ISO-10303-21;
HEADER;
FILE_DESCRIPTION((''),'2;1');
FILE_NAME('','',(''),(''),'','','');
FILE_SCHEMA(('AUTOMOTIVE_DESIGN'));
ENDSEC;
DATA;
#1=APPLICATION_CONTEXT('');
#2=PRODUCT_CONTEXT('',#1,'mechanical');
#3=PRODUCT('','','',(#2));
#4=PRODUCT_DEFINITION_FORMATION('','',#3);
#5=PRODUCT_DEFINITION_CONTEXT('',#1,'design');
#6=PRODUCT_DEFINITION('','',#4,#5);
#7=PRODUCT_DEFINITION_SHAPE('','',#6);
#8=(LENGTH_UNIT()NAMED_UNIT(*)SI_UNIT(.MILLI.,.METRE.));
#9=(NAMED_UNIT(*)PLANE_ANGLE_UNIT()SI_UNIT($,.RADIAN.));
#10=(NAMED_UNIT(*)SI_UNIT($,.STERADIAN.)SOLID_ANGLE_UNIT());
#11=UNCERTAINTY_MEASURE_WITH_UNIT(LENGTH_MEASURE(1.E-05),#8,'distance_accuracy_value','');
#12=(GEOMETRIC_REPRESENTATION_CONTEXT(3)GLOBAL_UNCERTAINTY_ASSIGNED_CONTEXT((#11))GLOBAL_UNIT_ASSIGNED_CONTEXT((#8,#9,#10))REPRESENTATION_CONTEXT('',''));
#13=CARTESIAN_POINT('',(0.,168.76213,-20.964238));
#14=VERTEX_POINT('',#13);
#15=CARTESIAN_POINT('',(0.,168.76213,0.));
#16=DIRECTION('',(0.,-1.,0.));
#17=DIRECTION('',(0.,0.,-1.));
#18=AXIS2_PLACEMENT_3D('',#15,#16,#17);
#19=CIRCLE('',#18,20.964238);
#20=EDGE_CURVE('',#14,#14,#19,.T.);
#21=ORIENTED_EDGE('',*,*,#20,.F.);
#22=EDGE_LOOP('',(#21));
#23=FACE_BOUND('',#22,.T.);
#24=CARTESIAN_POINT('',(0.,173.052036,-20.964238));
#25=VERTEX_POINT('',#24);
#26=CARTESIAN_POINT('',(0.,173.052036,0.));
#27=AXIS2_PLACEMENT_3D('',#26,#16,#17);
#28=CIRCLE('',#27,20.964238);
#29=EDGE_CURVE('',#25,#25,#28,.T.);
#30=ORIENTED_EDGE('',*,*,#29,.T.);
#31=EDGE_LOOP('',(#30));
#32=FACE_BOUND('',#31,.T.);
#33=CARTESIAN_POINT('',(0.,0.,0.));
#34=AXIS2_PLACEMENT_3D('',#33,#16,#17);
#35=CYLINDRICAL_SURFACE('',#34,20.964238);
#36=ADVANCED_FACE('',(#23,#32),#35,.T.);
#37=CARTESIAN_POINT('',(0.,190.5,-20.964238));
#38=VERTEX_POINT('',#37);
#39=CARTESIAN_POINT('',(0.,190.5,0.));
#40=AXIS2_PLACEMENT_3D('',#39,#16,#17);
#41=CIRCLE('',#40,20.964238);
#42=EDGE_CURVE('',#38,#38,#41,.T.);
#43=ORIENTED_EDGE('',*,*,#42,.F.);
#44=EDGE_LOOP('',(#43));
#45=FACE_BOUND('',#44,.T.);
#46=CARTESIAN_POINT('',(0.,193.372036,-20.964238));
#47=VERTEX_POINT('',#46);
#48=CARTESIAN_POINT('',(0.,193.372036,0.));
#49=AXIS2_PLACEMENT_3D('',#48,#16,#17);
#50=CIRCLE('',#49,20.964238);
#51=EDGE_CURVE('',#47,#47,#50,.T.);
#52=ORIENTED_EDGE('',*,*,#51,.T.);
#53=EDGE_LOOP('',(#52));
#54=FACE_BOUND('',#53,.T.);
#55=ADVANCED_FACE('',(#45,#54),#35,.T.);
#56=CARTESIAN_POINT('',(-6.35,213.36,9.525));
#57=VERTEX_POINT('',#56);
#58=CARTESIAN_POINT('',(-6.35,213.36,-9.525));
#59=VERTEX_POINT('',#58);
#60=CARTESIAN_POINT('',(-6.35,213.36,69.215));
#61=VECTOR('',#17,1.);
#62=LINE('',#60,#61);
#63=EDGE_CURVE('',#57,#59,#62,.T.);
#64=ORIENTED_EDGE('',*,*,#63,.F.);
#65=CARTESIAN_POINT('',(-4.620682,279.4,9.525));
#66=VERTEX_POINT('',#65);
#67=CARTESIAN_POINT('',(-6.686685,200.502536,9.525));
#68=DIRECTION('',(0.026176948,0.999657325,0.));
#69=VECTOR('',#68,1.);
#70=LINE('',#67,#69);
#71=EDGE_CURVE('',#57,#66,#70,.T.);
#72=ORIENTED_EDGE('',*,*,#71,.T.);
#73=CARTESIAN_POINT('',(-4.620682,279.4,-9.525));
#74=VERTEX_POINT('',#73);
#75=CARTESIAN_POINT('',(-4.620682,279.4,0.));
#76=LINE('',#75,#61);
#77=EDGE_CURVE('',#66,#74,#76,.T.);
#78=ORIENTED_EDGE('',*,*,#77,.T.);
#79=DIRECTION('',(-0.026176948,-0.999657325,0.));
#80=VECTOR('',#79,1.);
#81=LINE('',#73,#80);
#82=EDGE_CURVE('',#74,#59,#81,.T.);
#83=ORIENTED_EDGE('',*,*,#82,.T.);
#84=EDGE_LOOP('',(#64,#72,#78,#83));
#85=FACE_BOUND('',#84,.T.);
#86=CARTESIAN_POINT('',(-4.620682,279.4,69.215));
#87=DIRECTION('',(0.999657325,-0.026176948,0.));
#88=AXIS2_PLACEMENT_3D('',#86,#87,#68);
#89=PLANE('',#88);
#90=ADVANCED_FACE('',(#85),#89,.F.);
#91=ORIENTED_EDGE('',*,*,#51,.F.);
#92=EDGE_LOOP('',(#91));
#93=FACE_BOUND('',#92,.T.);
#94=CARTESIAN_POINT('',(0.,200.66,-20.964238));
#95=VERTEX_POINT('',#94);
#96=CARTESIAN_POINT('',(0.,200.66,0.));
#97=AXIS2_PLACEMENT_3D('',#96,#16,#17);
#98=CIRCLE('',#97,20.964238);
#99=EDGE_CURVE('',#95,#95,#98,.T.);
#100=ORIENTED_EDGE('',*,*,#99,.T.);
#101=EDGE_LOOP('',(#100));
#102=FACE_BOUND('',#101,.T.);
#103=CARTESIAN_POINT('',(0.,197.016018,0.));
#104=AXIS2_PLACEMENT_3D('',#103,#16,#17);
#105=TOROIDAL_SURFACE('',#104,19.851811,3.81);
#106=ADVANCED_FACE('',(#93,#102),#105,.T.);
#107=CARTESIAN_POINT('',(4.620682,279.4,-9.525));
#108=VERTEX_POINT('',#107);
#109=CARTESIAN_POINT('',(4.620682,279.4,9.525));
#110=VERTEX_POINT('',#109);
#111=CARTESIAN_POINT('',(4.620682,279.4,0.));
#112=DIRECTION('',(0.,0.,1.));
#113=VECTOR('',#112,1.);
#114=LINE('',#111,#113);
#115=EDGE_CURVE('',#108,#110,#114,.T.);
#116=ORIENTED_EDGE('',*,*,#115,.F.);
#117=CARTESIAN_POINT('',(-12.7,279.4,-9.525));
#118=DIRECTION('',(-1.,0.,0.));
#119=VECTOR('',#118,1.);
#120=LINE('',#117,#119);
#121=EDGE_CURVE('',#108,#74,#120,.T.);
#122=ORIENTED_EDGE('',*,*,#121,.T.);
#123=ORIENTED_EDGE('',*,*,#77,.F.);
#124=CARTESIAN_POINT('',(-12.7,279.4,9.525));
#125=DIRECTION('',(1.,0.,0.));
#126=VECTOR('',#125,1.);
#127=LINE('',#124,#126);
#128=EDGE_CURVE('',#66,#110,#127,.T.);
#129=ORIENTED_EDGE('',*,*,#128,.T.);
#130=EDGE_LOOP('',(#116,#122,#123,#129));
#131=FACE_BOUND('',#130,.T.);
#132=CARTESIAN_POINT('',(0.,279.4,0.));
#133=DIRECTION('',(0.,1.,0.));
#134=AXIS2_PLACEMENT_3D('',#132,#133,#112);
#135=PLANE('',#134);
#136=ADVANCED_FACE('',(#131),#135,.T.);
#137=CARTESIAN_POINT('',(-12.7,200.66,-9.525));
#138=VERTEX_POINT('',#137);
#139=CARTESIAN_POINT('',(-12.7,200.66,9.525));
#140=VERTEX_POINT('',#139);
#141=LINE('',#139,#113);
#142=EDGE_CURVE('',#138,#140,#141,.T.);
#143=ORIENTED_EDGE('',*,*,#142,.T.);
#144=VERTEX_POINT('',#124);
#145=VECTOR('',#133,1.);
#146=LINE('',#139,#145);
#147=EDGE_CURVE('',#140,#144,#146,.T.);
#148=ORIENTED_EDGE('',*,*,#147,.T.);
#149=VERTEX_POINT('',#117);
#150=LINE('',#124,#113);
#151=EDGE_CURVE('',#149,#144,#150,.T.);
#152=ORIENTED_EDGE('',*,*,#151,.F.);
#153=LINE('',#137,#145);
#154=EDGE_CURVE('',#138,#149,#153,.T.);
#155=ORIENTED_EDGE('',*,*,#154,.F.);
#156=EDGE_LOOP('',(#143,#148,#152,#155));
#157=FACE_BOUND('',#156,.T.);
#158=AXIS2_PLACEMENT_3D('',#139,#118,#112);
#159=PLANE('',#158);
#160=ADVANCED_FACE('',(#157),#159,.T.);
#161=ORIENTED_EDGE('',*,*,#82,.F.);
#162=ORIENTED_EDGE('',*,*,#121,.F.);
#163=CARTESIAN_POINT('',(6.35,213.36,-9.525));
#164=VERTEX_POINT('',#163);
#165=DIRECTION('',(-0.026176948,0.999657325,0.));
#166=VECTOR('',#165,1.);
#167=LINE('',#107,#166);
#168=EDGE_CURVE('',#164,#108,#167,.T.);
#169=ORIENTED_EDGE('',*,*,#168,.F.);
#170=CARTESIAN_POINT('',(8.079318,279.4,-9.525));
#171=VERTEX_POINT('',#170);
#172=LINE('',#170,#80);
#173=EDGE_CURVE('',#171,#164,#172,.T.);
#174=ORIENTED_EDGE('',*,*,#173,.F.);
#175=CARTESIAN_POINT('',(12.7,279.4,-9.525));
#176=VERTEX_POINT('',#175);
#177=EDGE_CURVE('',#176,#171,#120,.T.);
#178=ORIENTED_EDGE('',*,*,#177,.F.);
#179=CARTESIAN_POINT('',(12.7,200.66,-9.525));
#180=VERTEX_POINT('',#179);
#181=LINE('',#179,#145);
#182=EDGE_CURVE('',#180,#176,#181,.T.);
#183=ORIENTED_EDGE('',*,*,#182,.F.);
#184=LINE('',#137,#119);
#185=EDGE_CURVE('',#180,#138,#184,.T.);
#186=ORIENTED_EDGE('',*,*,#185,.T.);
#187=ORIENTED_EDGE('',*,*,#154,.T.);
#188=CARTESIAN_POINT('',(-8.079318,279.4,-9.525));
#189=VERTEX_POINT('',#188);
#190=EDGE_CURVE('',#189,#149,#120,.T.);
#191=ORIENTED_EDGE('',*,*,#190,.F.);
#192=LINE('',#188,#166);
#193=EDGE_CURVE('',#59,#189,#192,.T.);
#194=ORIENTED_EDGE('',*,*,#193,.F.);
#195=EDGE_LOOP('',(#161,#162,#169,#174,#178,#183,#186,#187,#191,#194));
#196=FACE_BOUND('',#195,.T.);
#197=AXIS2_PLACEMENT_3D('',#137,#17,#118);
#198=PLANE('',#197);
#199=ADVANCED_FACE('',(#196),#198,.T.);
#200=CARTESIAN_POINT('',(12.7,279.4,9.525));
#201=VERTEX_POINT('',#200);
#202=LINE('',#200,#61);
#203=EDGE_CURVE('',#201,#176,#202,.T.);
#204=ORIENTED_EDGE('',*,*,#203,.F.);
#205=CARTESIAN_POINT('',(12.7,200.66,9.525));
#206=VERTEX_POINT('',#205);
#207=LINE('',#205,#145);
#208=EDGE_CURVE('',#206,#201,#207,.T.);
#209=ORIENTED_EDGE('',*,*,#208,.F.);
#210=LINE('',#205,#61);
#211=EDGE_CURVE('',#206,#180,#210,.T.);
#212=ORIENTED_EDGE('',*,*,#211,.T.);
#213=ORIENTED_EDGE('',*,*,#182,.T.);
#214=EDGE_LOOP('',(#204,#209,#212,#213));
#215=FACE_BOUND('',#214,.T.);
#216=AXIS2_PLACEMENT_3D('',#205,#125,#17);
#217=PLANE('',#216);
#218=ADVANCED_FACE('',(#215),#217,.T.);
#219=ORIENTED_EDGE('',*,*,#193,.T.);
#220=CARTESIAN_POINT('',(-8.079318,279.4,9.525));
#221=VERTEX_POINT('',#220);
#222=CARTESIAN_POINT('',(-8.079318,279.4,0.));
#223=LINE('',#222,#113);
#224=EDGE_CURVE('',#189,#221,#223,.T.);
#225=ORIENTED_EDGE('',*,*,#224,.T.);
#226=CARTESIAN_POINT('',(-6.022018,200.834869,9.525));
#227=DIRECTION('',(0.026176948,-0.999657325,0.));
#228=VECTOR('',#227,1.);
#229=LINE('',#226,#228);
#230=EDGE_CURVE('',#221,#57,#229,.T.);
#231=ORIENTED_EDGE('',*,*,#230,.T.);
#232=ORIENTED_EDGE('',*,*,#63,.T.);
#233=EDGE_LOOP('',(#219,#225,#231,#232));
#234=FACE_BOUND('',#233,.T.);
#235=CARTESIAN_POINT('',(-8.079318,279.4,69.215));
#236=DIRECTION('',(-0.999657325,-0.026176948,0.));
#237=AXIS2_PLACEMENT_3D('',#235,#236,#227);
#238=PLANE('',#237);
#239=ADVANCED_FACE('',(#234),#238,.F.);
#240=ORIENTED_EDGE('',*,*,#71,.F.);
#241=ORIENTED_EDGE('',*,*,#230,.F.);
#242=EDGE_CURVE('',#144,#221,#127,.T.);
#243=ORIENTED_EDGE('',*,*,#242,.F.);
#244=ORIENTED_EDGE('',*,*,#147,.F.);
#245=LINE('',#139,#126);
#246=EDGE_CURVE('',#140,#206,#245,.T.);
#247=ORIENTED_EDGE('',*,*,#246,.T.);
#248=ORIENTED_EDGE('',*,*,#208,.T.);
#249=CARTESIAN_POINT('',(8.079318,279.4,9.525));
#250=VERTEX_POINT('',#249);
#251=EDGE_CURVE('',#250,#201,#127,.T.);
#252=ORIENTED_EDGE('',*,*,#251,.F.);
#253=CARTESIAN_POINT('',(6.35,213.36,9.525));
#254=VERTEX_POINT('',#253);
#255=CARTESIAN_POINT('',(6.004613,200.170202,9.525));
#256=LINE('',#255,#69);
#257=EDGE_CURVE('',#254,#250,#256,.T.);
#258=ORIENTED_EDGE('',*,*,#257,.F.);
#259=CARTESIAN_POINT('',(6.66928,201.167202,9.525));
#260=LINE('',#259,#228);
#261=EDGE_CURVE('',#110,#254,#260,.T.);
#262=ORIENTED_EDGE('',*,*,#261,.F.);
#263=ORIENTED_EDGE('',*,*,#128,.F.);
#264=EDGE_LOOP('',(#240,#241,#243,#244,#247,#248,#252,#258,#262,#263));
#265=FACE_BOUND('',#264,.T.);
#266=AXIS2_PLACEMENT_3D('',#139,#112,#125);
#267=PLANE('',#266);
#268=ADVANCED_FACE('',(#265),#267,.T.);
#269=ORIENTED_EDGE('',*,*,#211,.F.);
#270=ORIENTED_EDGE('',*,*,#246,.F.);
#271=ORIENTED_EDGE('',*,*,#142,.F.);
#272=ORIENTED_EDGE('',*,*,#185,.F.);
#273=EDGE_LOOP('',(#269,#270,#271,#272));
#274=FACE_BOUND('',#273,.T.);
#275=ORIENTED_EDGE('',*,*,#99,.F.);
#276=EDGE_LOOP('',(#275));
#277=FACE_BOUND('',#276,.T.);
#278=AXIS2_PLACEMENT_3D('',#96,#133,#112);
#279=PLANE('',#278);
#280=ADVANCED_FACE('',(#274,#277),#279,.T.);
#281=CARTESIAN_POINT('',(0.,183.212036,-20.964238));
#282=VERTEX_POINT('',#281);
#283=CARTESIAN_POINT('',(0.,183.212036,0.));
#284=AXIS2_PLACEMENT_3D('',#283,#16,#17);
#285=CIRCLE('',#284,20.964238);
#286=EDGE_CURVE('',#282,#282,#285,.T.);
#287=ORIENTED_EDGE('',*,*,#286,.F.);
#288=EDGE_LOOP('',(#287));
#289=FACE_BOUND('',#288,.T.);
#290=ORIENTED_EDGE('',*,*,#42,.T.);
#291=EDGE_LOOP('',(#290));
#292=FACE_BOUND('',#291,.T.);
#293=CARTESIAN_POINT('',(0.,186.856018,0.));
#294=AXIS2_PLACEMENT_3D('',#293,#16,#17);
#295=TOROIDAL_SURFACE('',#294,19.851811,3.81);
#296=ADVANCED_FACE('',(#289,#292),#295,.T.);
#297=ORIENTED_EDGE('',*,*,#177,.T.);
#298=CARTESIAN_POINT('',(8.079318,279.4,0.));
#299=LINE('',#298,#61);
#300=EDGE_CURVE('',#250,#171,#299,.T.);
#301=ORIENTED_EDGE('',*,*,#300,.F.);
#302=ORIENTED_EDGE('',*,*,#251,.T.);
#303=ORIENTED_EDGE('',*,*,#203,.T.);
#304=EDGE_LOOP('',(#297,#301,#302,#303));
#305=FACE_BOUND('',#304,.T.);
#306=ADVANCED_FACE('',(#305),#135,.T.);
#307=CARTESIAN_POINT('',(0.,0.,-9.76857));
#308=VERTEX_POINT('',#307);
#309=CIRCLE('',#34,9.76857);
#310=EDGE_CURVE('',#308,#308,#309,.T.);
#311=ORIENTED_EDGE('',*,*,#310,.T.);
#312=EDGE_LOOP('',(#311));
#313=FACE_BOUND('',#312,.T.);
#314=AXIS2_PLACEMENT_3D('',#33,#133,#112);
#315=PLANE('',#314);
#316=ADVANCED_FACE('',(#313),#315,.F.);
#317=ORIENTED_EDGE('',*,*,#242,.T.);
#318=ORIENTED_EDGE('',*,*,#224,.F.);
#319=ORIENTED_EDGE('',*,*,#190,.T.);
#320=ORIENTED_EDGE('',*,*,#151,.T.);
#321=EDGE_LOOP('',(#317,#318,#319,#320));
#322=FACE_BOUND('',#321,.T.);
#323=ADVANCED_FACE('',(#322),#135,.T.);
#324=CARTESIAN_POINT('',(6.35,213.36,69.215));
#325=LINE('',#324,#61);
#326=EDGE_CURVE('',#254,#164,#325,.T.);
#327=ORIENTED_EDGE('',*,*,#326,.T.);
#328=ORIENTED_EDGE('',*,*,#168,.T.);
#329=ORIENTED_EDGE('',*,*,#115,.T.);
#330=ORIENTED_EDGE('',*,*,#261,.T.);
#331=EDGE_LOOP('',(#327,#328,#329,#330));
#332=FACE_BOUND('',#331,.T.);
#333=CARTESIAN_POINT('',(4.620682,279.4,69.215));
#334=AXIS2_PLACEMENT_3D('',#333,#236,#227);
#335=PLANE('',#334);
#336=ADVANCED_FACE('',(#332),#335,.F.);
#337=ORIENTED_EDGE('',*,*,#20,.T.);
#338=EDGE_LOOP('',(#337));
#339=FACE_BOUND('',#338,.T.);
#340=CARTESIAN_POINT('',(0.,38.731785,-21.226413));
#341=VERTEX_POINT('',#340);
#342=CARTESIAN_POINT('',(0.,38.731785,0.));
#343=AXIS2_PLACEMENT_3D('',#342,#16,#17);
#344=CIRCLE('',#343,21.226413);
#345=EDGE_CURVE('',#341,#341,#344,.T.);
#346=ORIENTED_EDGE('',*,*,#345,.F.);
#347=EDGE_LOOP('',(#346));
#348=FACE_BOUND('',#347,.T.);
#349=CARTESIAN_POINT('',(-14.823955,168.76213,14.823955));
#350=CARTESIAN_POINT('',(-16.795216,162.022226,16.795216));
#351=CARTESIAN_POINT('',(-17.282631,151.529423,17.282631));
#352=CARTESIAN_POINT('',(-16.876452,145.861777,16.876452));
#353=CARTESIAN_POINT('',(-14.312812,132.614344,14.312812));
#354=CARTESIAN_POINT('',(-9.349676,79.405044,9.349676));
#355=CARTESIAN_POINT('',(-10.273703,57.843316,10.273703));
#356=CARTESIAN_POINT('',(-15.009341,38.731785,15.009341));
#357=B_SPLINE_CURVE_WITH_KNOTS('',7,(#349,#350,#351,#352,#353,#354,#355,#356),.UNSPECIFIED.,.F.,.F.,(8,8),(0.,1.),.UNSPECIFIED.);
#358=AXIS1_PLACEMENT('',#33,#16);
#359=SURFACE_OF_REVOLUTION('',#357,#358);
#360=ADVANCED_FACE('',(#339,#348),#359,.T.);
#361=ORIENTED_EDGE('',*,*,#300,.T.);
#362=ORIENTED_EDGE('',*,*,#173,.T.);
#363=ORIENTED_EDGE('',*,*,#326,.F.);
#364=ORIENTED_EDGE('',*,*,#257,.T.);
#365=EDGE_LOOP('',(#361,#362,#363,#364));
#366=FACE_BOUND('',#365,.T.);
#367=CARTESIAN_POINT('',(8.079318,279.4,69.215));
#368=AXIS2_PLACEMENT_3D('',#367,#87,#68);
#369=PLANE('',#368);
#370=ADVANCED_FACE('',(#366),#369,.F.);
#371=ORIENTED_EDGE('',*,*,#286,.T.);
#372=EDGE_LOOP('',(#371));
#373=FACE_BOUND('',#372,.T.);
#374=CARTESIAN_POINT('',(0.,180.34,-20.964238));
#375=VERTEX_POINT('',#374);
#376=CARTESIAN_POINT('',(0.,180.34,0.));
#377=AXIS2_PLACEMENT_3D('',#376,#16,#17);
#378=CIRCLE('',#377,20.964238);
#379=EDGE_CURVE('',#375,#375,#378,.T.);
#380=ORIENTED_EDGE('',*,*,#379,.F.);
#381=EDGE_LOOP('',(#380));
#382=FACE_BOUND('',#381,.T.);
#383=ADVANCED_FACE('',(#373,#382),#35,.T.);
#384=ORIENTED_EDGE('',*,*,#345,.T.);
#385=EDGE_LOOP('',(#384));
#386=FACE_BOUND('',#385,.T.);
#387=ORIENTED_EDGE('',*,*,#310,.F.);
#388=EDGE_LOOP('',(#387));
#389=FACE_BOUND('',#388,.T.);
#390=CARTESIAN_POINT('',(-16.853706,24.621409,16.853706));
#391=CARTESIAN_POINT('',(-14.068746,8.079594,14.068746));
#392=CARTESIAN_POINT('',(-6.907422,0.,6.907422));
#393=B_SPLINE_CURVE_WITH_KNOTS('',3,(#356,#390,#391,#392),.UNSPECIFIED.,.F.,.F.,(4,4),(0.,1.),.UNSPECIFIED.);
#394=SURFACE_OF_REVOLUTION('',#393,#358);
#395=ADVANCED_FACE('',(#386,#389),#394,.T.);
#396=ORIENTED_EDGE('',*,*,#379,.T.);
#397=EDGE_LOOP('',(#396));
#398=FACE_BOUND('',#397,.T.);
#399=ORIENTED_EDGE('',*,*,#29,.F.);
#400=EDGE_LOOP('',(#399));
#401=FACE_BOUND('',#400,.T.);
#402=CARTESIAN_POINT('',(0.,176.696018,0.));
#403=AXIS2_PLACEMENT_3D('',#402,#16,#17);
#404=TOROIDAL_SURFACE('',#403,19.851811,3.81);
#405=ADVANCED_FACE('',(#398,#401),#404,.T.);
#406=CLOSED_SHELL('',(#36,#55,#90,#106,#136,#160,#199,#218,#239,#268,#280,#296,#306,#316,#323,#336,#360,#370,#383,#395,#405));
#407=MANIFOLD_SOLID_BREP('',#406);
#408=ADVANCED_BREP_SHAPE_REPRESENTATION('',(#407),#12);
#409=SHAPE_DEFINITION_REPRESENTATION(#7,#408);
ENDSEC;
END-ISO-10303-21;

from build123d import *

# Parameters (mm, degrees)
SKETCH1_W                = 47.625
SKETCH1_H                = 47.625
BOSS_EXTRUDE1_DEPTH      = 279.4
SKETCH2_OUTSIDE_W        = 107.105
SKETCH2_OUTSIDE_H        = 107.105
SKETCH2_OUTSIDE_W_2      = 25.4
SKETCH2_OUTSIDE_H_2      = 19.05
CUT_EXTRUDE1_DEPTH       = 78.74
CUT_REVOLVE1_2_OUTLINE_W = 47.625
CUT_REVOLVE1_2_OUTLINE_H = 47.625
CUT_REVOLVE1_2_OUTLINE_R = 23.661811137
CUT_REVOLVE1_2_DEPTH     = 200.66
CUT_EXTRUDE2_DEPTH       = 78.74


with BuildPart() as part:
    # Sketch1 → Boss-Extrude1 (new body)
    with BuildSketch(Plane(origin=(0, 0, 0), x_dir=(1, 0, 0), z_dir=(0, 1, 0))):
        Rectangle(SKETCH1_W, SKETCH1_H)
    extrude(amount=BOSS_EXTRUDE1_DEPTH)

    # Sketch2 outside → Cut-Extrude1 (cut)
    with BuildSketch(Plane(origin=(0, 279.4, 0), x_dir=(1, 0, 0), z_dir=(0, 1, 0))):
        with Locations((0.0005, 0.0005)):
            Rectangle(SKETCH2_OUTSIDE_W, SKETCH2_OUTSIDE_H)
        Rectangle(SKETCH2_OUTSIDE_W_2, SKETCH2_OUTSIDE_H_2, mode=Mode.SUBTRACT)
    extrude(amount=-CUT_EXTRUDE1_DEPTH, mode=Mode.SUBTRACT)

    # Cut-Revolve1: read off the stored shape, not the designer's step
    # Cut-Revolve1 outline → Cut-Revolve1 (revolve, cut)
    with BuildSketch(Plane.XY):
        with BuildLine():
            add(Edge.make_bspline(
                [(21.226413076, 38.731784647), (23.834738993, 24.62140881), (19.896211677, 8.079594082), (9.768570007, 0)],
                knots=[0, 0, 0, 0, 1, 1, 1, 1], degree=3))
            Line((9.768570007, 0), (23.661811137, -1e-07))
            Line((23.661811137, -1e-07), (23.661811137, 176.696017869))
            ThreePointArc((23.661811137, 176.696017869), (22.914036435, 174.42910891), (20.964238315, 173.052035737))
            Line((20.964238315, 173.052035737), (20.964238315, 168.762129589))
            add(Edge.make_bspline(
                [(20.964238315, 168.762129589), (23.752022666, 162.022226447), (24.441330942, 151.529422692), (23.866907379, 145.861776868), (20.241372554, 132.614344063), (13.222438272, 79.405044367), (14.529209669, 57.843316323), (21.226413076, 38.731784647)],
                knots=[0, 0, 0, 0, 0, 0, 0, 0, 1, 1, 1, 1, 1, 1, 1, 1], degree=7))
        make_face()
        with BuildLine():
            ThreePointArc((20.964238315, 180.34), (22.914036435, 178.962926827), (23.661811137, 176.696017869))
            Line((23.661811137, 176.696017869), (23.661811137, 186.856017869))
            ThreePointArc((23.661811137, 186.856017869), (22.914036435, 184.58910891), (20.964238315, 183.212035737))
            Line((20.964238315, 183.212035737), (20.964238315, 180.34))
        make_face()
        with BuildLine():
            Line((23.661811137, 200.66), (20.964238315, 200.66))
            ThreePointArc((20.964238315, 200.66), (22.914036435, 199.282926827), (23.661811137, 197.016017869))
            Line((23.661811137, 197.016017869), (23.661811137, 200.66))
        make_face()
        with BuildLine():
            ThreePointArc((20.964238315, 190.5), (22.914036435, 189.122926827), (23.661811137, 186.856017869))
            Line((23.661811137, 186.856017869), (23.661811137, 197.016017869))
            ThreePointArc((23.661811137, 197.016017869), (22.914036435, 194.74910891), (20.964238315, 193.372035737))
            Line((20.964238315, 193.372035737), (20.964238315, 190.5))
        make_face()
    revolve(axis=Axis((0, 0, 0), (0, 1, 0)), mode=Mode.SUBTRACT)

    # Cut-Revolve1 2 outline → Cut-Revolve1 2 (cut)
    with BuildSketch(Plane(origin=(0, 0, 0), x_dir=(1, 0, 0), z_dir=(0, 1, 0))):
        Rectangle(CUT_REVOLVE1_2_OUTLINE_W, CUT_REVOLVE1_2_OUTLINE_H)
        Circle(CUT_REVOLVE1_2_OUTLINE_R, mode=Mode.SUBTRACT)
    extrude(amount=CUT_REVOLVE1_2_DEPTH, mode=Mode.SUBTRACT)

    # Sketch4 → Cut-Extrude2 (cut)
    with BuildSketch(Plane(origin=(0, 0, -9.525), x_dir=(-1, 0, 0), z_dir=(0, 0, -1))):
        Polygon((-8.07931826, 279.4), (-4.62068174, 279.4), (-6.35, 213.36), align=None)
        Polygon((8.07931826, 279.4), (4.62068174, 279.4), (6.35, 213.36), align=None)
    extrude(amount=-CUT_EXTRUDE2_DEPTH, mode=Mode.SUBTRACT)


solid = part.part
